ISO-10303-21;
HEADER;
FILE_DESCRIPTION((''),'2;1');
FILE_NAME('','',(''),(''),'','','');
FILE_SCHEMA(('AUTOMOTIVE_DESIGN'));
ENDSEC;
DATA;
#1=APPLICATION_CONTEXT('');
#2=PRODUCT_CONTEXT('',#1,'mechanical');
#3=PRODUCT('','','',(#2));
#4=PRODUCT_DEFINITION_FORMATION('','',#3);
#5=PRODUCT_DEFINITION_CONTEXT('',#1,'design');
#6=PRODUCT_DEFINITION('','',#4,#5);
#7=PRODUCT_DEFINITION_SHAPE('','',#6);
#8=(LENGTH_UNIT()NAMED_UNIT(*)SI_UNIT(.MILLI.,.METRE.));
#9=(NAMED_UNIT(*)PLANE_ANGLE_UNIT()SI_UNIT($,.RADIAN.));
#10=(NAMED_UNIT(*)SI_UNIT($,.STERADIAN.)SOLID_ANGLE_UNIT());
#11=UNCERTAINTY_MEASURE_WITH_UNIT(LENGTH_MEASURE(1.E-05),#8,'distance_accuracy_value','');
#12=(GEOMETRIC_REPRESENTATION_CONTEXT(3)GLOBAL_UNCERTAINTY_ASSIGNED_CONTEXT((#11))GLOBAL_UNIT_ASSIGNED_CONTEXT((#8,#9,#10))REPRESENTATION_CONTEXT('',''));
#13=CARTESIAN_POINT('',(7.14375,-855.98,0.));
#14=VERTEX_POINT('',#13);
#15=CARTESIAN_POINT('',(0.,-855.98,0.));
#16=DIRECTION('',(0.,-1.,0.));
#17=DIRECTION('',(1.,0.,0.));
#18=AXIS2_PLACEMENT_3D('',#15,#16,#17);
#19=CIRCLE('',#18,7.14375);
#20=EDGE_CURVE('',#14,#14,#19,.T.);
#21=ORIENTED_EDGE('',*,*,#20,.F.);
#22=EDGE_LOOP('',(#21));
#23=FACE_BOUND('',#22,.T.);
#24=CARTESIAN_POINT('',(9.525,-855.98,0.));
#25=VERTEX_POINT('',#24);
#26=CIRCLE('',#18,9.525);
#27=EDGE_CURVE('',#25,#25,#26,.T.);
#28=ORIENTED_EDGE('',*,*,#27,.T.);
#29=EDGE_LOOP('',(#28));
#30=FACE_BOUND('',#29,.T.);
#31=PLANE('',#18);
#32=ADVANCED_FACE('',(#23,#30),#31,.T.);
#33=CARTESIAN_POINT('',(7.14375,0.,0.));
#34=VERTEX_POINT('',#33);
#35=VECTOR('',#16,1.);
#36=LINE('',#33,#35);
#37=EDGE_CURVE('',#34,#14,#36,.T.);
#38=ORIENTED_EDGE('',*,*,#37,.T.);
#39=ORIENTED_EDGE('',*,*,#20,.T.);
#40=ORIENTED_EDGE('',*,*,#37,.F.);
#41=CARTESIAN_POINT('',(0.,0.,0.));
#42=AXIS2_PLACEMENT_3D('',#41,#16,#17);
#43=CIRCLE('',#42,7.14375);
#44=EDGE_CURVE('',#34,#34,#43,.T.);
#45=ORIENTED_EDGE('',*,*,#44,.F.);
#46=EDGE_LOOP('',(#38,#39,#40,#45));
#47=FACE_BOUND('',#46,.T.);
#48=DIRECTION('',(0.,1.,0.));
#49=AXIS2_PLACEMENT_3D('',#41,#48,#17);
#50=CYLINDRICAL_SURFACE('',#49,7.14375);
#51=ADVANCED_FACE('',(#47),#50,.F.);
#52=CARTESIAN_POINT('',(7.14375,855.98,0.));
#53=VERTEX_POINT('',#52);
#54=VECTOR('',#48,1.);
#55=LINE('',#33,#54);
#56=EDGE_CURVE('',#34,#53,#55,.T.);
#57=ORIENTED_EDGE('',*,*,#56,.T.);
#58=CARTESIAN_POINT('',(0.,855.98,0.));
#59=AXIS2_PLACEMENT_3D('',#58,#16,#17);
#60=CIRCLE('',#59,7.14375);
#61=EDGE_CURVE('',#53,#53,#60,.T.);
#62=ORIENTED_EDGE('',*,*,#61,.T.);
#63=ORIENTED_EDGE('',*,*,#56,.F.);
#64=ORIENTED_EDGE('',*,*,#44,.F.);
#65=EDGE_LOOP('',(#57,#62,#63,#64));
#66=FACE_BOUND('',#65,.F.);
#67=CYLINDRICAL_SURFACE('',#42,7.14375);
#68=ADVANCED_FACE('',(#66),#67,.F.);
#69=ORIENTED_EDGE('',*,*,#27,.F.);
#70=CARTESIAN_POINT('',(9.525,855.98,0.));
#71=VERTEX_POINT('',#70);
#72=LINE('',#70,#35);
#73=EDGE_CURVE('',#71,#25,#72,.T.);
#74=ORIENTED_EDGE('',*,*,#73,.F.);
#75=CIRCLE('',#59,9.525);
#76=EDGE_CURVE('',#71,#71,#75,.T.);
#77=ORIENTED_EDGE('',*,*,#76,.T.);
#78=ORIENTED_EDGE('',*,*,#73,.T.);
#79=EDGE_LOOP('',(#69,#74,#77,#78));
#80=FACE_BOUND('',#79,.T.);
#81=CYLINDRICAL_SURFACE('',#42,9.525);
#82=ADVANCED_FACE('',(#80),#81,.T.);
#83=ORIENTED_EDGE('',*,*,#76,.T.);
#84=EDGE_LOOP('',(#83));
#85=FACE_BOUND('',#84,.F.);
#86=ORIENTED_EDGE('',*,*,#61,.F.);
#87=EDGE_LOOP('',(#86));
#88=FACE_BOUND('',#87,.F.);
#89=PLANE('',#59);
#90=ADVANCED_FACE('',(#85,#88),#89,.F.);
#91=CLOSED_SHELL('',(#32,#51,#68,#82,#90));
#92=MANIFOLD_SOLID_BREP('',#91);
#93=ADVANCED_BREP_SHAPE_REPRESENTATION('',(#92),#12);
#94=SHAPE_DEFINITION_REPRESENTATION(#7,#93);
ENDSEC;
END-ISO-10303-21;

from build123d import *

# Parameters (mm, degrees)
F0_R          = 9.525
F0_R_2        = 7.14375
F1_DEPTH      = 855.98
F1_DEPTH_BACK = 855.98


# Not quite as in the source:
# - a feature names something its author has since deleted; it is built from what else it names


with BuildPart() as f1:
    # F0 (on Front) → F1 (new body, two sides)
    with BuildSketch(Plane.XZ) as f1_sk:
        Circle(F0_R)
        Circle(F0_R_2, mode=Mode.SUBTRACT)
    extrude(amount=F1_DEPTH)
    extrude(f1_sk.sketch, amount=-F1_DEPTH_BACK)


solid = f1.part
